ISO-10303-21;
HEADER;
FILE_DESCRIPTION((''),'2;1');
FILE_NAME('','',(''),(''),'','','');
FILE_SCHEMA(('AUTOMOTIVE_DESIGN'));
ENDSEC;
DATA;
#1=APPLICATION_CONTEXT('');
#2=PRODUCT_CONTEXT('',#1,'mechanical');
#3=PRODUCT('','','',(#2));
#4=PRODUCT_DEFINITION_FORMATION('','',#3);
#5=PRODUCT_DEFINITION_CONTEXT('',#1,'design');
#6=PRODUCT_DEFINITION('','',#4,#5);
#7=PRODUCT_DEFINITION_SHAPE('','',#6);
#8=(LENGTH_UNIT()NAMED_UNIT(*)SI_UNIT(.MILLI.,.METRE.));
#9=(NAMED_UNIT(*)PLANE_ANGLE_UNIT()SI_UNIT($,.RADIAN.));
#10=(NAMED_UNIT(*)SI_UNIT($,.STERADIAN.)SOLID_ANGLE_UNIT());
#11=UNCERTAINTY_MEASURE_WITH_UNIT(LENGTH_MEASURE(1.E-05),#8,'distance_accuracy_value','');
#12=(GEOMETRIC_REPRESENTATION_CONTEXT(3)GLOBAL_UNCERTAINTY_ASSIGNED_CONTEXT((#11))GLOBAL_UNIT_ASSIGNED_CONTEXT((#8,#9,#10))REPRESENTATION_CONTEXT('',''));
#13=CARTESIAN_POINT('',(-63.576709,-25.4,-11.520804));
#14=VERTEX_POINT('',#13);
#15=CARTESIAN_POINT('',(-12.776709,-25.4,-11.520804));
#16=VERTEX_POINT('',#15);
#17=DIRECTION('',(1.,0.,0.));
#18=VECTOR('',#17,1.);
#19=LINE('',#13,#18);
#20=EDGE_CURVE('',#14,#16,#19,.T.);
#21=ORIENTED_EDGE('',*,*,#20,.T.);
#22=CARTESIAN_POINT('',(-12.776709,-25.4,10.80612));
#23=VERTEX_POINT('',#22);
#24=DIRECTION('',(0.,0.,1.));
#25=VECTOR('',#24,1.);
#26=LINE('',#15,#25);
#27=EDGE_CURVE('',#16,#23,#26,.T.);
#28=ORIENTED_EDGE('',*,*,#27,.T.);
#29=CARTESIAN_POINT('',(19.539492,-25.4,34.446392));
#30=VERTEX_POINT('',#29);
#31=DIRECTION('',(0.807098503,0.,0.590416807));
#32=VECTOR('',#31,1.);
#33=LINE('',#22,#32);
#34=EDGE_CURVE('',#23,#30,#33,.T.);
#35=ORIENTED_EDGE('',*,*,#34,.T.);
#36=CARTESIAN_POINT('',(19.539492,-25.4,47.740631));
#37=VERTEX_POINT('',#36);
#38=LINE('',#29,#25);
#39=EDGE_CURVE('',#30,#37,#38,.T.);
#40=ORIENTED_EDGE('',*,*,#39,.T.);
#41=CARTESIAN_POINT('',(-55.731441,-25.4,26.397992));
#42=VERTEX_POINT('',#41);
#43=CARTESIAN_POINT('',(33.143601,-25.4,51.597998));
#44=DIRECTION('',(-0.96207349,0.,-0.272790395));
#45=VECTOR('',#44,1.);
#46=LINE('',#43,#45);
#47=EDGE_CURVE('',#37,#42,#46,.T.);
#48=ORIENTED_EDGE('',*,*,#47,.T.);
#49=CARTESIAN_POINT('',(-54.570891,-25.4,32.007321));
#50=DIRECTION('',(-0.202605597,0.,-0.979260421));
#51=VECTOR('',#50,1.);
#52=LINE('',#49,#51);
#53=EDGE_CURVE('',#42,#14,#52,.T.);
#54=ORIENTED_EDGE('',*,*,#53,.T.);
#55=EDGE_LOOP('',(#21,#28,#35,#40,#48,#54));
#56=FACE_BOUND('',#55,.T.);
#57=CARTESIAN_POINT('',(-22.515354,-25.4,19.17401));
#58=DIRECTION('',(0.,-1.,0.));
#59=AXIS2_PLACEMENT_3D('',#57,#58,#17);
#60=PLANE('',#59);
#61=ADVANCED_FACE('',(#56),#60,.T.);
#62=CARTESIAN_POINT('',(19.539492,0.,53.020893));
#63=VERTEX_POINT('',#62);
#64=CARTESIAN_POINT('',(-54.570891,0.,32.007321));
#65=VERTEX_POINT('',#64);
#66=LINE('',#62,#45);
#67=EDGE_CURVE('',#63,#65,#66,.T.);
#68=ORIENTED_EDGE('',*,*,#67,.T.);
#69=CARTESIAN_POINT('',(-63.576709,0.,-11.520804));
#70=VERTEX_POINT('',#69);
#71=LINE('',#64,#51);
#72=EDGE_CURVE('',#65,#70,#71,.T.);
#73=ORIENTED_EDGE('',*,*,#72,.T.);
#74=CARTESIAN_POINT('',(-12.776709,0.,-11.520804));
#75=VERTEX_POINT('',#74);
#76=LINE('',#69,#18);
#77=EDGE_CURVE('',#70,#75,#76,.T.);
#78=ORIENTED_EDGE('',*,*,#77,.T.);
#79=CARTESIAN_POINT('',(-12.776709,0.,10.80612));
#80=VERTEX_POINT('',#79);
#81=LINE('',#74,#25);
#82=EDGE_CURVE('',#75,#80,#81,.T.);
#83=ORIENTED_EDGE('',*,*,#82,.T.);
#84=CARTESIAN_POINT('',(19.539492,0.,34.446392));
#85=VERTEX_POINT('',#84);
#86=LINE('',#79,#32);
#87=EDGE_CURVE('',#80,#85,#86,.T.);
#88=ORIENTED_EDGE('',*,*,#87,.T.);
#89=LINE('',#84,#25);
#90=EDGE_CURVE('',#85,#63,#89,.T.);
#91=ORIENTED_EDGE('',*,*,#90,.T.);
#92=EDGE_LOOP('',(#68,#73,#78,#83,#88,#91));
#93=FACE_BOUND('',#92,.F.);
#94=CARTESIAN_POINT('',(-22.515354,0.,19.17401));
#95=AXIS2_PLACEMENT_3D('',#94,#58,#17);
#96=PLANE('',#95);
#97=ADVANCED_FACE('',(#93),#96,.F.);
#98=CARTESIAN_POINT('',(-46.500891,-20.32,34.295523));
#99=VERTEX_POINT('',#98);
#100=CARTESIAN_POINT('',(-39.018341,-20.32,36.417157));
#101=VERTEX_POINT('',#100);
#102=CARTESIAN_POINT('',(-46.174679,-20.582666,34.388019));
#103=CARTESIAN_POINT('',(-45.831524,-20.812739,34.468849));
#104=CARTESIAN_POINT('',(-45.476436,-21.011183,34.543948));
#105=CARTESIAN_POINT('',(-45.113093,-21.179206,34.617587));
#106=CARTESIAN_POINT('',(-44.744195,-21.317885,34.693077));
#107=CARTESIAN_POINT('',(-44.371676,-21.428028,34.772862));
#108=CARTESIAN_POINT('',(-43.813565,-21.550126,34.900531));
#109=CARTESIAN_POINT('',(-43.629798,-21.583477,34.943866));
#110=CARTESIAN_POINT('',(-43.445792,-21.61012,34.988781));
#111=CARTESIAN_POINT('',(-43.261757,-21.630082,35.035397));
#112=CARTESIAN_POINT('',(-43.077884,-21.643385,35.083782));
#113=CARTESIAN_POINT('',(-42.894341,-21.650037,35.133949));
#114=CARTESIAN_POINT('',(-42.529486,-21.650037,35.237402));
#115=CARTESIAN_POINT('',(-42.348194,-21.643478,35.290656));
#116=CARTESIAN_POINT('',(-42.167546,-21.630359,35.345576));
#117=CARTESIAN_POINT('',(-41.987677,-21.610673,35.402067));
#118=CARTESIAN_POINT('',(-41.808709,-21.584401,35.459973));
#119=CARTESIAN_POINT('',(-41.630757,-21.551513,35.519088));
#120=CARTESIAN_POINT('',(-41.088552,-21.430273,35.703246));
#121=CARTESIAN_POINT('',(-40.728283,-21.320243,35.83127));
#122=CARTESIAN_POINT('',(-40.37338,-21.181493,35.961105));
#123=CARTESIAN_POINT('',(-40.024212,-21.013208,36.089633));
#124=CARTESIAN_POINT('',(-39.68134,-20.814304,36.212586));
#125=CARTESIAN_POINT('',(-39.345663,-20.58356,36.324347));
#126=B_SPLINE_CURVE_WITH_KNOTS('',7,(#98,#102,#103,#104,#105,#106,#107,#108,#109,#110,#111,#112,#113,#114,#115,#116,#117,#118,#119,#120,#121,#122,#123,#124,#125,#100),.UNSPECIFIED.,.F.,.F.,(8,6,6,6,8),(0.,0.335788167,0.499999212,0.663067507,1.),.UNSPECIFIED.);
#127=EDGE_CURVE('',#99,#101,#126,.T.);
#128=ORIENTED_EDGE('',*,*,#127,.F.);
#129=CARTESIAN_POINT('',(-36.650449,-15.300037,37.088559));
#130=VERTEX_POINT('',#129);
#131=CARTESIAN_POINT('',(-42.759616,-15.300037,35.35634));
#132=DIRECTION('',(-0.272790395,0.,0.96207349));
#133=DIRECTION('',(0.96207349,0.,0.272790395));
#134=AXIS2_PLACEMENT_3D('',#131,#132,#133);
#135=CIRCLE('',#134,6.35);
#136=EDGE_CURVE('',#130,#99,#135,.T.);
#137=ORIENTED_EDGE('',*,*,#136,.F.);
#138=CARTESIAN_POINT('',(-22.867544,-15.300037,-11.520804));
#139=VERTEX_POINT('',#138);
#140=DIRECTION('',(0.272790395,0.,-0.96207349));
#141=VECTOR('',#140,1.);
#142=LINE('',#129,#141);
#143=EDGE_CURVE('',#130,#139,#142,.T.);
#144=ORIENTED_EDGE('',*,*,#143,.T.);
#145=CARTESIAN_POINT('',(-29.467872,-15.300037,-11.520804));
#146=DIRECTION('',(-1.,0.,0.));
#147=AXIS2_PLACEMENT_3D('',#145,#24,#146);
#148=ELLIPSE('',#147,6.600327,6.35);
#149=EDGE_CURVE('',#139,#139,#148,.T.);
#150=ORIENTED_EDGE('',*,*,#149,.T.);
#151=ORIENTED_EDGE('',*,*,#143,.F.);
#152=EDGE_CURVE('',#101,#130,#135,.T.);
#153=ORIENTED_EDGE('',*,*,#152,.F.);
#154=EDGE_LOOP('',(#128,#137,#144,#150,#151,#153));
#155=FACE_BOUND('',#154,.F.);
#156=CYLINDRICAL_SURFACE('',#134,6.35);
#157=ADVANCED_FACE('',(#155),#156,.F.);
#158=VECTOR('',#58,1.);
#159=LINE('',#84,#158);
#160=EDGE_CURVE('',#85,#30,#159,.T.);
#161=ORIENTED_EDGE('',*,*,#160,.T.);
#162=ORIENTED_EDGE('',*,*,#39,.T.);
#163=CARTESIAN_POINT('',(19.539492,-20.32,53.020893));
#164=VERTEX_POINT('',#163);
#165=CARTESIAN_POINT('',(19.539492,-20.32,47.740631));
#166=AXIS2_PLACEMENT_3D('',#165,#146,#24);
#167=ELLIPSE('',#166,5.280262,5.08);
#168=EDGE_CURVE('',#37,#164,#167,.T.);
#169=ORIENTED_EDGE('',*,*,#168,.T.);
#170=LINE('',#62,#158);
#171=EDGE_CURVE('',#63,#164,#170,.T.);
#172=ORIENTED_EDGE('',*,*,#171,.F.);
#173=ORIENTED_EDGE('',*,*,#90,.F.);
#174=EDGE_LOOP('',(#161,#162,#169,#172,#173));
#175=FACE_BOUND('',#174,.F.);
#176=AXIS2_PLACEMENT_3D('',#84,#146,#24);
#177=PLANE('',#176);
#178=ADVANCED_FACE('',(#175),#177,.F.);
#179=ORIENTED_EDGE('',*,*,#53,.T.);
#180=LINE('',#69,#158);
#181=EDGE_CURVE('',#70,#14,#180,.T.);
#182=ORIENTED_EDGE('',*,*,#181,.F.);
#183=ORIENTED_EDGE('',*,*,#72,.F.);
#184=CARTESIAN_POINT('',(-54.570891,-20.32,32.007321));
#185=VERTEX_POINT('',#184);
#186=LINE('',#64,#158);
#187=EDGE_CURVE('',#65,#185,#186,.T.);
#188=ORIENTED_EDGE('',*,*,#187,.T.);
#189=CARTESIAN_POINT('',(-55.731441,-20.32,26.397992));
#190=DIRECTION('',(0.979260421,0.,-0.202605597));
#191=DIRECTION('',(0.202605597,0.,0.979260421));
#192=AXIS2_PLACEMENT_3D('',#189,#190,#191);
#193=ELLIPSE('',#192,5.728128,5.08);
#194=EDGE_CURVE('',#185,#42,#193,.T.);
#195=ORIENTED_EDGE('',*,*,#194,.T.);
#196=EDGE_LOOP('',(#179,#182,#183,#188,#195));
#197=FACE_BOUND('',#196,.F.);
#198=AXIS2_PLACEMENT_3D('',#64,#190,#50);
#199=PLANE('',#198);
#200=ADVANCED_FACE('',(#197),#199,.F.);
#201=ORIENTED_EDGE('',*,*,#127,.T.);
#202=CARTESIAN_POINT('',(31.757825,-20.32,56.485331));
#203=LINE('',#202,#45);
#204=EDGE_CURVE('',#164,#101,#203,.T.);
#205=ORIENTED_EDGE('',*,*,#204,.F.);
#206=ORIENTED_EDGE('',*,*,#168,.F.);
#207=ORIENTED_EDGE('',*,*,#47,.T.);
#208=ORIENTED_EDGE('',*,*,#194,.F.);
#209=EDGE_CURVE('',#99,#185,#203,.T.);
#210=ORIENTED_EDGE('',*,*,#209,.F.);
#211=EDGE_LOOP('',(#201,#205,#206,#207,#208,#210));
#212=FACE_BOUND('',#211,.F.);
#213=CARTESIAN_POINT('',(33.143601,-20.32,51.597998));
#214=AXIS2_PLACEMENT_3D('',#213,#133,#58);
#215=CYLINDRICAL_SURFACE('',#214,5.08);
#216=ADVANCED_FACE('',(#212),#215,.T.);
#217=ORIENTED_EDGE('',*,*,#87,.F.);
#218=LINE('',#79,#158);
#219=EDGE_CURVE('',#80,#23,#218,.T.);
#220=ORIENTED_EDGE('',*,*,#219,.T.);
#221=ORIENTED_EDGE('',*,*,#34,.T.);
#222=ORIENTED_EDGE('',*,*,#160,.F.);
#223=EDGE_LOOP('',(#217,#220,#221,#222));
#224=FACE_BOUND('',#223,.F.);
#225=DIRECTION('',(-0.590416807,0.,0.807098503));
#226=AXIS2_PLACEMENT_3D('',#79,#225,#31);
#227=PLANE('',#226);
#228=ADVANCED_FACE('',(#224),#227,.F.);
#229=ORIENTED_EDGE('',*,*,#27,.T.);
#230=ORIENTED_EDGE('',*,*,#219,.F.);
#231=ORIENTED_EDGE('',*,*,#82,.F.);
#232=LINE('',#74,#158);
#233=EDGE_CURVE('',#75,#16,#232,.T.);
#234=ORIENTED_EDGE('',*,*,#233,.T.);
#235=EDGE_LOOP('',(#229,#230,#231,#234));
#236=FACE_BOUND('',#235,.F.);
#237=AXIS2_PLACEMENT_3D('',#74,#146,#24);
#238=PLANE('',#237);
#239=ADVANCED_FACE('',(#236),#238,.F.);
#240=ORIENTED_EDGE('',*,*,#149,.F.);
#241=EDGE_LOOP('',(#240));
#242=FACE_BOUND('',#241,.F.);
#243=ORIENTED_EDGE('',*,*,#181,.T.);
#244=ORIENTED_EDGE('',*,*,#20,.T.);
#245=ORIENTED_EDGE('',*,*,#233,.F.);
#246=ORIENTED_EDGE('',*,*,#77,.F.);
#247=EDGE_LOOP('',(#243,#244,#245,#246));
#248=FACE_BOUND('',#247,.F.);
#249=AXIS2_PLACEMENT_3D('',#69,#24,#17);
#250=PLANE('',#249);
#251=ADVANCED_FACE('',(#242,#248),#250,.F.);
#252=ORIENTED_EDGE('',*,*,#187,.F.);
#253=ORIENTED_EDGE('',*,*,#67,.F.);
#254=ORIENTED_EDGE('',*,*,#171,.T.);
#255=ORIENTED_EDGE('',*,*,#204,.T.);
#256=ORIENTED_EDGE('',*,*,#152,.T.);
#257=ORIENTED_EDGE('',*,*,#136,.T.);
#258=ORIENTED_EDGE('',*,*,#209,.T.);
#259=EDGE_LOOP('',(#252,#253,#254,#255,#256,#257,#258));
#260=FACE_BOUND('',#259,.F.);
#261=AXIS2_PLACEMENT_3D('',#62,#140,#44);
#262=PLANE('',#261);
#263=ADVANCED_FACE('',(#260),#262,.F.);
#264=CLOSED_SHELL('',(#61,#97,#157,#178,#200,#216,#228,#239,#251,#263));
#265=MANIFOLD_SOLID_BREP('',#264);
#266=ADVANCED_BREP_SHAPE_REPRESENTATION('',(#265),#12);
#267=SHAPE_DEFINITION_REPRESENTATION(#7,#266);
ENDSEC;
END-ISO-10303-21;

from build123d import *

# Parameters (mm, degrees)
F1_DEPTH    = 25.4
F2_R        = 6.35
F3_DEPTH    = 62.0948563832
F4_T1_DEPTH = 102.4319350424


# Not quite as in the source:
# - a fillet or chamfer that OpenCascade refuses, or shapes differently, is made with other operations: its cross-section is extruded or revolved along the edge and cut away or added


with BuildPart() as f1:
    # F0 (on Front) → F1 (new body)
    with BuildSketch(Plane.XZ):
        Polygon((-12.7767093225, -11.5208044833), (-12.7767093225, 10.8061201186), (19.5394920482, 34.4463924892), (19.5394920482, 53.020893242), (-54.5708905419, 32.0073212298), (-63.5767093225, -11.5208044833), align=None)
    extrude(amount=F1_DEPTH)

    # F2 (on face) → F3 (cut, through all)
    with BuildSketch(Plane(origin=(-12.4610134404, 0, 43.9473342748), x_dir=(0.96207349, 0, 0.2727903953), z_dir=(-0.2727903953, 0, 0.96207349))):
        with Locations((-31.4930230379, -15.3000373393)):
            Circle(F2_R)
    extrude(amount=-F3_DEPTH, mode=Mode.SUBTRACT)

    # F4: fillet of radius 5.08 on 1 edges, made by hand

    # F4_s2 → F4_t1 (cut)
    with BuildSketch(Plane(origin=(44.218838812, 0, 12.5379969877), x_dir=(0, 1, 0), z_dir=(-0.96207349, 0, -0.2727903953))):
        with BuildLine():
            ThreePointArc((-25.4, -40.5998100459), (-23.9121024484, -44.1919124943), (-20.32, -45.6798100459))
            Line((-20.32, -45.6798100459), (-25.4, -45.6798100459))
            Line((-25.4, -45.6798100459), (-25.4, -40.5998100459))
        make_face()
    extrude(amount=F4_T1_DEPTH, mode=Mode.SUBTRACT)


solid = f1.part
